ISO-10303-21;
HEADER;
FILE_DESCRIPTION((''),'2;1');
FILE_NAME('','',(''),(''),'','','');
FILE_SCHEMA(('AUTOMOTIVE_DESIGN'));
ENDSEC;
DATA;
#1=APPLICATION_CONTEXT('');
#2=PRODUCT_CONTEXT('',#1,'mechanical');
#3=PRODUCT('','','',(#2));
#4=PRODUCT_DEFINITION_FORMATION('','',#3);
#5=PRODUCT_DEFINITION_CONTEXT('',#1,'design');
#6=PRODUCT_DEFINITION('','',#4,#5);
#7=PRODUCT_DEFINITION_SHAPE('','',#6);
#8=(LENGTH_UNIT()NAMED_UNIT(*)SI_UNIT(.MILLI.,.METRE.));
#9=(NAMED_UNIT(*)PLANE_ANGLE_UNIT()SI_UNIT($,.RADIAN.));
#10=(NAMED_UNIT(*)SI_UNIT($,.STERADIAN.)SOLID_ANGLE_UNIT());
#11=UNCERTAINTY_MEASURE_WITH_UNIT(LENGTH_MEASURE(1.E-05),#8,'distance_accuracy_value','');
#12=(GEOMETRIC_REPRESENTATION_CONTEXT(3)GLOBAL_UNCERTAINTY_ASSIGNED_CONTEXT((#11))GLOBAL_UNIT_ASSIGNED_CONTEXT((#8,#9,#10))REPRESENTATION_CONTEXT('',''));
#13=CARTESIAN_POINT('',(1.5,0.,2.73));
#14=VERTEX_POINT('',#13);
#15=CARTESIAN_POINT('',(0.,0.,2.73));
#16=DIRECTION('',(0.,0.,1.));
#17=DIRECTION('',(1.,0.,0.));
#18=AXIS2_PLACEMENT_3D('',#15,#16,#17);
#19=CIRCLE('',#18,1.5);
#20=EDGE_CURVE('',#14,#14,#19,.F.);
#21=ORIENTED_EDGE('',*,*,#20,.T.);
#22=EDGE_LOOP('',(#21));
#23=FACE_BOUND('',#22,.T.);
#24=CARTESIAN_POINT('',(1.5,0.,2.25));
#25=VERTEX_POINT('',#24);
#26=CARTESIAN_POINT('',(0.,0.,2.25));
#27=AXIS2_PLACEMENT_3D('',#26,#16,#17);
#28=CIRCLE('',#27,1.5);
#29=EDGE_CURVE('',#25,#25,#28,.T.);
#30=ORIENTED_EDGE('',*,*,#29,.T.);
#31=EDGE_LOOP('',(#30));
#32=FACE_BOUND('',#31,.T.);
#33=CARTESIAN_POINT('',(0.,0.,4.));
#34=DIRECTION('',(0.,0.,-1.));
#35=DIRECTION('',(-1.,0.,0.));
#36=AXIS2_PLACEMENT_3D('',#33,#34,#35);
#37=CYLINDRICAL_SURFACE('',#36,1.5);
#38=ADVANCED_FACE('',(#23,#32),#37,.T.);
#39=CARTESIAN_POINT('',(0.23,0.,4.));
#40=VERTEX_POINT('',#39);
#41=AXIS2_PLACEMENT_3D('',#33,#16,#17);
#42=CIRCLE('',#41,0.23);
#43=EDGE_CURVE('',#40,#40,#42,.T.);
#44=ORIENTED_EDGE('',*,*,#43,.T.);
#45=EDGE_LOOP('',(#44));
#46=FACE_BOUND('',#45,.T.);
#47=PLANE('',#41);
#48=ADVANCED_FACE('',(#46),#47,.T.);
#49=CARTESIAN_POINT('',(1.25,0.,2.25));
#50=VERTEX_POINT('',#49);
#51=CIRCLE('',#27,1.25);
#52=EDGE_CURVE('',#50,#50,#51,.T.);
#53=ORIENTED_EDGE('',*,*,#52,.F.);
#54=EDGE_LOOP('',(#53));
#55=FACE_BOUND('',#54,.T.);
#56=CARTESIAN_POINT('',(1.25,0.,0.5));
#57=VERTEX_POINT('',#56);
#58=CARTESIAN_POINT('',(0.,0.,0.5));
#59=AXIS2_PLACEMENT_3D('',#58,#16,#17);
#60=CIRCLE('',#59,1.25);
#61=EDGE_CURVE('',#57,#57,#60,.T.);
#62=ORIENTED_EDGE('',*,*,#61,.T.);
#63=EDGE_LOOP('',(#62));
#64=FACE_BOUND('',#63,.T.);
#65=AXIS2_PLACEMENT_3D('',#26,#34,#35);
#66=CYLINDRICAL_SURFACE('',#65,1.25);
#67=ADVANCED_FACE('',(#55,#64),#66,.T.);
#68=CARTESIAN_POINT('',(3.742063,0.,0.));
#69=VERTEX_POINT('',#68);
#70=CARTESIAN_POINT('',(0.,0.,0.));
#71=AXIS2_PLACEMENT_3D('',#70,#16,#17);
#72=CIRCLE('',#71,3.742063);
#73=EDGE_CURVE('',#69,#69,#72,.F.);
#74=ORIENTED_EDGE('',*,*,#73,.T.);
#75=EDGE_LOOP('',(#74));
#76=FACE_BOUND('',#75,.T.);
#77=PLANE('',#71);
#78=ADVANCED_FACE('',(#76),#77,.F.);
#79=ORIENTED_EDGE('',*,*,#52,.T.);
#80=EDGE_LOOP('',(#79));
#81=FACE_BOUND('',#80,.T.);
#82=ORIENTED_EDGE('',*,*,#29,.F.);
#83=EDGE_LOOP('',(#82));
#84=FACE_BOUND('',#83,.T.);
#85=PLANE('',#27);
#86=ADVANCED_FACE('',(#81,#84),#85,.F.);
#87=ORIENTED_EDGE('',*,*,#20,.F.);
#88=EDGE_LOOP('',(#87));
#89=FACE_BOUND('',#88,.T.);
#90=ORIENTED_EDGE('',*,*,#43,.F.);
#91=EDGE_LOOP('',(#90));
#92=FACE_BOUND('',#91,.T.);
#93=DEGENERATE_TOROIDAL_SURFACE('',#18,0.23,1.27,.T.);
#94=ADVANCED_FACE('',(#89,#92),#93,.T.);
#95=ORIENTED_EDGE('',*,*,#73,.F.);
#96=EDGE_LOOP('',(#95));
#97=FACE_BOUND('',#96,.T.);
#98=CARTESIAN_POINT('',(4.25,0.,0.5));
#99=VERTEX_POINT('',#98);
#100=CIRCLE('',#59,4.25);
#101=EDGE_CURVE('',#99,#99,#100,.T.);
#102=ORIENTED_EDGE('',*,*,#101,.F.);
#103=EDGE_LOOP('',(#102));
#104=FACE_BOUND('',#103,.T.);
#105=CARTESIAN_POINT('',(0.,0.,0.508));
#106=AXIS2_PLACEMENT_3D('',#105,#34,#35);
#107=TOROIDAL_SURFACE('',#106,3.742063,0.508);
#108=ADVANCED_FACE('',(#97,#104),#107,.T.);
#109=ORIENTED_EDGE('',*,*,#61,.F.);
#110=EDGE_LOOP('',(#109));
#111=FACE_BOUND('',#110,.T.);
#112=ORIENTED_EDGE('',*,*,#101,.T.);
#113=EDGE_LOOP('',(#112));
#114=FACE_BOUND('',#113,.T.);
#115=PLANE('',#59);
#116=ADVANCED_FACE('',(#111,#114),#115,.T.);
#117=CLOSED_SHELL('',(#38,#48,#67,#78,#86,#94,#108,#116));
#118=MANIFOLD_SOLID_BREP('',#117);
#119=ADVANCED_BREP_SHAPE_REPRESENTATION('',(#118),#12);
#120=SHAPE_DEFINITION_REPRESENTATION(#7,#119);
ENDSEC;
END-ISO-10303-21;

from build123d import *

# Parameters (mm, degrees)
SKETCH1_R           = 4.25
BOSS_EXTRUDE1_DEPTH = 0.5
FILLET1_R           = 0.508
SKETCH2_R           = 1.25
BOSS_EXTRUDE2_DEPTH = 1.75
SKETCH3_R           = 1.5
BOSS_EXTRUDE3_DEPTH = 1.75
FILLET2_R           = 1.27


with BuildPart() as part:
    # Sketch1 → Boss-Extrude1 (new body)
    with BuildSketch(Plane.XY):
        Circle(SKETCH1_R)
    extrude(amount=BOSS_EXTRUDE1_DEPTH)

    # Fillet1
    # the kernel refuses this fillet: 0.508 mm, written as the material it takes off along each edge
    with BuildSketch(Plane(origin=(0, 0, 0), x_dir=(1, 0, 0), z_dir=(0, -1, 0))) as fillet1_piece_1:
        with BuildLine():
            CenterArc((4.25 - FILLET1_R, FILLET1_R), FILLET1_R, 270, 90)
            Line((4.25 - FILLET1_R, 0), (4.25, 0))
            Line((4.25, 0), (4.25, FILLET1_R))
        make_face()
    revolve(axis=Axis((0, 0, 0), (0, 0, 1)), mode=Mode.SUBTRACT)

    # Sketch2 → Boss-Extrude2 (add)
    with BuildSketch(Plane.XY.offset(0.5)):
        Circle(SKETCH2_R)
    extrude(amount=BOSS_EXTRUDE2_DEPTH)

    # Sketch3 → Boss-Extrude3 (add)
    with BuildSketch(Plane.XY.offset(2.25)):
        Circle(SKETCH3_R)
    extrude(amount=BOSS_EXTRUDE3_DEPTH)

    # Fillet2
    fillet2_edges = [part.edges().sort_by_distance(p)[0] for p in [
        (-1.5, 0, 4),
    ]]
    fillet(fillet2_edges, radius=FILLET2_R)


solid = part.part
